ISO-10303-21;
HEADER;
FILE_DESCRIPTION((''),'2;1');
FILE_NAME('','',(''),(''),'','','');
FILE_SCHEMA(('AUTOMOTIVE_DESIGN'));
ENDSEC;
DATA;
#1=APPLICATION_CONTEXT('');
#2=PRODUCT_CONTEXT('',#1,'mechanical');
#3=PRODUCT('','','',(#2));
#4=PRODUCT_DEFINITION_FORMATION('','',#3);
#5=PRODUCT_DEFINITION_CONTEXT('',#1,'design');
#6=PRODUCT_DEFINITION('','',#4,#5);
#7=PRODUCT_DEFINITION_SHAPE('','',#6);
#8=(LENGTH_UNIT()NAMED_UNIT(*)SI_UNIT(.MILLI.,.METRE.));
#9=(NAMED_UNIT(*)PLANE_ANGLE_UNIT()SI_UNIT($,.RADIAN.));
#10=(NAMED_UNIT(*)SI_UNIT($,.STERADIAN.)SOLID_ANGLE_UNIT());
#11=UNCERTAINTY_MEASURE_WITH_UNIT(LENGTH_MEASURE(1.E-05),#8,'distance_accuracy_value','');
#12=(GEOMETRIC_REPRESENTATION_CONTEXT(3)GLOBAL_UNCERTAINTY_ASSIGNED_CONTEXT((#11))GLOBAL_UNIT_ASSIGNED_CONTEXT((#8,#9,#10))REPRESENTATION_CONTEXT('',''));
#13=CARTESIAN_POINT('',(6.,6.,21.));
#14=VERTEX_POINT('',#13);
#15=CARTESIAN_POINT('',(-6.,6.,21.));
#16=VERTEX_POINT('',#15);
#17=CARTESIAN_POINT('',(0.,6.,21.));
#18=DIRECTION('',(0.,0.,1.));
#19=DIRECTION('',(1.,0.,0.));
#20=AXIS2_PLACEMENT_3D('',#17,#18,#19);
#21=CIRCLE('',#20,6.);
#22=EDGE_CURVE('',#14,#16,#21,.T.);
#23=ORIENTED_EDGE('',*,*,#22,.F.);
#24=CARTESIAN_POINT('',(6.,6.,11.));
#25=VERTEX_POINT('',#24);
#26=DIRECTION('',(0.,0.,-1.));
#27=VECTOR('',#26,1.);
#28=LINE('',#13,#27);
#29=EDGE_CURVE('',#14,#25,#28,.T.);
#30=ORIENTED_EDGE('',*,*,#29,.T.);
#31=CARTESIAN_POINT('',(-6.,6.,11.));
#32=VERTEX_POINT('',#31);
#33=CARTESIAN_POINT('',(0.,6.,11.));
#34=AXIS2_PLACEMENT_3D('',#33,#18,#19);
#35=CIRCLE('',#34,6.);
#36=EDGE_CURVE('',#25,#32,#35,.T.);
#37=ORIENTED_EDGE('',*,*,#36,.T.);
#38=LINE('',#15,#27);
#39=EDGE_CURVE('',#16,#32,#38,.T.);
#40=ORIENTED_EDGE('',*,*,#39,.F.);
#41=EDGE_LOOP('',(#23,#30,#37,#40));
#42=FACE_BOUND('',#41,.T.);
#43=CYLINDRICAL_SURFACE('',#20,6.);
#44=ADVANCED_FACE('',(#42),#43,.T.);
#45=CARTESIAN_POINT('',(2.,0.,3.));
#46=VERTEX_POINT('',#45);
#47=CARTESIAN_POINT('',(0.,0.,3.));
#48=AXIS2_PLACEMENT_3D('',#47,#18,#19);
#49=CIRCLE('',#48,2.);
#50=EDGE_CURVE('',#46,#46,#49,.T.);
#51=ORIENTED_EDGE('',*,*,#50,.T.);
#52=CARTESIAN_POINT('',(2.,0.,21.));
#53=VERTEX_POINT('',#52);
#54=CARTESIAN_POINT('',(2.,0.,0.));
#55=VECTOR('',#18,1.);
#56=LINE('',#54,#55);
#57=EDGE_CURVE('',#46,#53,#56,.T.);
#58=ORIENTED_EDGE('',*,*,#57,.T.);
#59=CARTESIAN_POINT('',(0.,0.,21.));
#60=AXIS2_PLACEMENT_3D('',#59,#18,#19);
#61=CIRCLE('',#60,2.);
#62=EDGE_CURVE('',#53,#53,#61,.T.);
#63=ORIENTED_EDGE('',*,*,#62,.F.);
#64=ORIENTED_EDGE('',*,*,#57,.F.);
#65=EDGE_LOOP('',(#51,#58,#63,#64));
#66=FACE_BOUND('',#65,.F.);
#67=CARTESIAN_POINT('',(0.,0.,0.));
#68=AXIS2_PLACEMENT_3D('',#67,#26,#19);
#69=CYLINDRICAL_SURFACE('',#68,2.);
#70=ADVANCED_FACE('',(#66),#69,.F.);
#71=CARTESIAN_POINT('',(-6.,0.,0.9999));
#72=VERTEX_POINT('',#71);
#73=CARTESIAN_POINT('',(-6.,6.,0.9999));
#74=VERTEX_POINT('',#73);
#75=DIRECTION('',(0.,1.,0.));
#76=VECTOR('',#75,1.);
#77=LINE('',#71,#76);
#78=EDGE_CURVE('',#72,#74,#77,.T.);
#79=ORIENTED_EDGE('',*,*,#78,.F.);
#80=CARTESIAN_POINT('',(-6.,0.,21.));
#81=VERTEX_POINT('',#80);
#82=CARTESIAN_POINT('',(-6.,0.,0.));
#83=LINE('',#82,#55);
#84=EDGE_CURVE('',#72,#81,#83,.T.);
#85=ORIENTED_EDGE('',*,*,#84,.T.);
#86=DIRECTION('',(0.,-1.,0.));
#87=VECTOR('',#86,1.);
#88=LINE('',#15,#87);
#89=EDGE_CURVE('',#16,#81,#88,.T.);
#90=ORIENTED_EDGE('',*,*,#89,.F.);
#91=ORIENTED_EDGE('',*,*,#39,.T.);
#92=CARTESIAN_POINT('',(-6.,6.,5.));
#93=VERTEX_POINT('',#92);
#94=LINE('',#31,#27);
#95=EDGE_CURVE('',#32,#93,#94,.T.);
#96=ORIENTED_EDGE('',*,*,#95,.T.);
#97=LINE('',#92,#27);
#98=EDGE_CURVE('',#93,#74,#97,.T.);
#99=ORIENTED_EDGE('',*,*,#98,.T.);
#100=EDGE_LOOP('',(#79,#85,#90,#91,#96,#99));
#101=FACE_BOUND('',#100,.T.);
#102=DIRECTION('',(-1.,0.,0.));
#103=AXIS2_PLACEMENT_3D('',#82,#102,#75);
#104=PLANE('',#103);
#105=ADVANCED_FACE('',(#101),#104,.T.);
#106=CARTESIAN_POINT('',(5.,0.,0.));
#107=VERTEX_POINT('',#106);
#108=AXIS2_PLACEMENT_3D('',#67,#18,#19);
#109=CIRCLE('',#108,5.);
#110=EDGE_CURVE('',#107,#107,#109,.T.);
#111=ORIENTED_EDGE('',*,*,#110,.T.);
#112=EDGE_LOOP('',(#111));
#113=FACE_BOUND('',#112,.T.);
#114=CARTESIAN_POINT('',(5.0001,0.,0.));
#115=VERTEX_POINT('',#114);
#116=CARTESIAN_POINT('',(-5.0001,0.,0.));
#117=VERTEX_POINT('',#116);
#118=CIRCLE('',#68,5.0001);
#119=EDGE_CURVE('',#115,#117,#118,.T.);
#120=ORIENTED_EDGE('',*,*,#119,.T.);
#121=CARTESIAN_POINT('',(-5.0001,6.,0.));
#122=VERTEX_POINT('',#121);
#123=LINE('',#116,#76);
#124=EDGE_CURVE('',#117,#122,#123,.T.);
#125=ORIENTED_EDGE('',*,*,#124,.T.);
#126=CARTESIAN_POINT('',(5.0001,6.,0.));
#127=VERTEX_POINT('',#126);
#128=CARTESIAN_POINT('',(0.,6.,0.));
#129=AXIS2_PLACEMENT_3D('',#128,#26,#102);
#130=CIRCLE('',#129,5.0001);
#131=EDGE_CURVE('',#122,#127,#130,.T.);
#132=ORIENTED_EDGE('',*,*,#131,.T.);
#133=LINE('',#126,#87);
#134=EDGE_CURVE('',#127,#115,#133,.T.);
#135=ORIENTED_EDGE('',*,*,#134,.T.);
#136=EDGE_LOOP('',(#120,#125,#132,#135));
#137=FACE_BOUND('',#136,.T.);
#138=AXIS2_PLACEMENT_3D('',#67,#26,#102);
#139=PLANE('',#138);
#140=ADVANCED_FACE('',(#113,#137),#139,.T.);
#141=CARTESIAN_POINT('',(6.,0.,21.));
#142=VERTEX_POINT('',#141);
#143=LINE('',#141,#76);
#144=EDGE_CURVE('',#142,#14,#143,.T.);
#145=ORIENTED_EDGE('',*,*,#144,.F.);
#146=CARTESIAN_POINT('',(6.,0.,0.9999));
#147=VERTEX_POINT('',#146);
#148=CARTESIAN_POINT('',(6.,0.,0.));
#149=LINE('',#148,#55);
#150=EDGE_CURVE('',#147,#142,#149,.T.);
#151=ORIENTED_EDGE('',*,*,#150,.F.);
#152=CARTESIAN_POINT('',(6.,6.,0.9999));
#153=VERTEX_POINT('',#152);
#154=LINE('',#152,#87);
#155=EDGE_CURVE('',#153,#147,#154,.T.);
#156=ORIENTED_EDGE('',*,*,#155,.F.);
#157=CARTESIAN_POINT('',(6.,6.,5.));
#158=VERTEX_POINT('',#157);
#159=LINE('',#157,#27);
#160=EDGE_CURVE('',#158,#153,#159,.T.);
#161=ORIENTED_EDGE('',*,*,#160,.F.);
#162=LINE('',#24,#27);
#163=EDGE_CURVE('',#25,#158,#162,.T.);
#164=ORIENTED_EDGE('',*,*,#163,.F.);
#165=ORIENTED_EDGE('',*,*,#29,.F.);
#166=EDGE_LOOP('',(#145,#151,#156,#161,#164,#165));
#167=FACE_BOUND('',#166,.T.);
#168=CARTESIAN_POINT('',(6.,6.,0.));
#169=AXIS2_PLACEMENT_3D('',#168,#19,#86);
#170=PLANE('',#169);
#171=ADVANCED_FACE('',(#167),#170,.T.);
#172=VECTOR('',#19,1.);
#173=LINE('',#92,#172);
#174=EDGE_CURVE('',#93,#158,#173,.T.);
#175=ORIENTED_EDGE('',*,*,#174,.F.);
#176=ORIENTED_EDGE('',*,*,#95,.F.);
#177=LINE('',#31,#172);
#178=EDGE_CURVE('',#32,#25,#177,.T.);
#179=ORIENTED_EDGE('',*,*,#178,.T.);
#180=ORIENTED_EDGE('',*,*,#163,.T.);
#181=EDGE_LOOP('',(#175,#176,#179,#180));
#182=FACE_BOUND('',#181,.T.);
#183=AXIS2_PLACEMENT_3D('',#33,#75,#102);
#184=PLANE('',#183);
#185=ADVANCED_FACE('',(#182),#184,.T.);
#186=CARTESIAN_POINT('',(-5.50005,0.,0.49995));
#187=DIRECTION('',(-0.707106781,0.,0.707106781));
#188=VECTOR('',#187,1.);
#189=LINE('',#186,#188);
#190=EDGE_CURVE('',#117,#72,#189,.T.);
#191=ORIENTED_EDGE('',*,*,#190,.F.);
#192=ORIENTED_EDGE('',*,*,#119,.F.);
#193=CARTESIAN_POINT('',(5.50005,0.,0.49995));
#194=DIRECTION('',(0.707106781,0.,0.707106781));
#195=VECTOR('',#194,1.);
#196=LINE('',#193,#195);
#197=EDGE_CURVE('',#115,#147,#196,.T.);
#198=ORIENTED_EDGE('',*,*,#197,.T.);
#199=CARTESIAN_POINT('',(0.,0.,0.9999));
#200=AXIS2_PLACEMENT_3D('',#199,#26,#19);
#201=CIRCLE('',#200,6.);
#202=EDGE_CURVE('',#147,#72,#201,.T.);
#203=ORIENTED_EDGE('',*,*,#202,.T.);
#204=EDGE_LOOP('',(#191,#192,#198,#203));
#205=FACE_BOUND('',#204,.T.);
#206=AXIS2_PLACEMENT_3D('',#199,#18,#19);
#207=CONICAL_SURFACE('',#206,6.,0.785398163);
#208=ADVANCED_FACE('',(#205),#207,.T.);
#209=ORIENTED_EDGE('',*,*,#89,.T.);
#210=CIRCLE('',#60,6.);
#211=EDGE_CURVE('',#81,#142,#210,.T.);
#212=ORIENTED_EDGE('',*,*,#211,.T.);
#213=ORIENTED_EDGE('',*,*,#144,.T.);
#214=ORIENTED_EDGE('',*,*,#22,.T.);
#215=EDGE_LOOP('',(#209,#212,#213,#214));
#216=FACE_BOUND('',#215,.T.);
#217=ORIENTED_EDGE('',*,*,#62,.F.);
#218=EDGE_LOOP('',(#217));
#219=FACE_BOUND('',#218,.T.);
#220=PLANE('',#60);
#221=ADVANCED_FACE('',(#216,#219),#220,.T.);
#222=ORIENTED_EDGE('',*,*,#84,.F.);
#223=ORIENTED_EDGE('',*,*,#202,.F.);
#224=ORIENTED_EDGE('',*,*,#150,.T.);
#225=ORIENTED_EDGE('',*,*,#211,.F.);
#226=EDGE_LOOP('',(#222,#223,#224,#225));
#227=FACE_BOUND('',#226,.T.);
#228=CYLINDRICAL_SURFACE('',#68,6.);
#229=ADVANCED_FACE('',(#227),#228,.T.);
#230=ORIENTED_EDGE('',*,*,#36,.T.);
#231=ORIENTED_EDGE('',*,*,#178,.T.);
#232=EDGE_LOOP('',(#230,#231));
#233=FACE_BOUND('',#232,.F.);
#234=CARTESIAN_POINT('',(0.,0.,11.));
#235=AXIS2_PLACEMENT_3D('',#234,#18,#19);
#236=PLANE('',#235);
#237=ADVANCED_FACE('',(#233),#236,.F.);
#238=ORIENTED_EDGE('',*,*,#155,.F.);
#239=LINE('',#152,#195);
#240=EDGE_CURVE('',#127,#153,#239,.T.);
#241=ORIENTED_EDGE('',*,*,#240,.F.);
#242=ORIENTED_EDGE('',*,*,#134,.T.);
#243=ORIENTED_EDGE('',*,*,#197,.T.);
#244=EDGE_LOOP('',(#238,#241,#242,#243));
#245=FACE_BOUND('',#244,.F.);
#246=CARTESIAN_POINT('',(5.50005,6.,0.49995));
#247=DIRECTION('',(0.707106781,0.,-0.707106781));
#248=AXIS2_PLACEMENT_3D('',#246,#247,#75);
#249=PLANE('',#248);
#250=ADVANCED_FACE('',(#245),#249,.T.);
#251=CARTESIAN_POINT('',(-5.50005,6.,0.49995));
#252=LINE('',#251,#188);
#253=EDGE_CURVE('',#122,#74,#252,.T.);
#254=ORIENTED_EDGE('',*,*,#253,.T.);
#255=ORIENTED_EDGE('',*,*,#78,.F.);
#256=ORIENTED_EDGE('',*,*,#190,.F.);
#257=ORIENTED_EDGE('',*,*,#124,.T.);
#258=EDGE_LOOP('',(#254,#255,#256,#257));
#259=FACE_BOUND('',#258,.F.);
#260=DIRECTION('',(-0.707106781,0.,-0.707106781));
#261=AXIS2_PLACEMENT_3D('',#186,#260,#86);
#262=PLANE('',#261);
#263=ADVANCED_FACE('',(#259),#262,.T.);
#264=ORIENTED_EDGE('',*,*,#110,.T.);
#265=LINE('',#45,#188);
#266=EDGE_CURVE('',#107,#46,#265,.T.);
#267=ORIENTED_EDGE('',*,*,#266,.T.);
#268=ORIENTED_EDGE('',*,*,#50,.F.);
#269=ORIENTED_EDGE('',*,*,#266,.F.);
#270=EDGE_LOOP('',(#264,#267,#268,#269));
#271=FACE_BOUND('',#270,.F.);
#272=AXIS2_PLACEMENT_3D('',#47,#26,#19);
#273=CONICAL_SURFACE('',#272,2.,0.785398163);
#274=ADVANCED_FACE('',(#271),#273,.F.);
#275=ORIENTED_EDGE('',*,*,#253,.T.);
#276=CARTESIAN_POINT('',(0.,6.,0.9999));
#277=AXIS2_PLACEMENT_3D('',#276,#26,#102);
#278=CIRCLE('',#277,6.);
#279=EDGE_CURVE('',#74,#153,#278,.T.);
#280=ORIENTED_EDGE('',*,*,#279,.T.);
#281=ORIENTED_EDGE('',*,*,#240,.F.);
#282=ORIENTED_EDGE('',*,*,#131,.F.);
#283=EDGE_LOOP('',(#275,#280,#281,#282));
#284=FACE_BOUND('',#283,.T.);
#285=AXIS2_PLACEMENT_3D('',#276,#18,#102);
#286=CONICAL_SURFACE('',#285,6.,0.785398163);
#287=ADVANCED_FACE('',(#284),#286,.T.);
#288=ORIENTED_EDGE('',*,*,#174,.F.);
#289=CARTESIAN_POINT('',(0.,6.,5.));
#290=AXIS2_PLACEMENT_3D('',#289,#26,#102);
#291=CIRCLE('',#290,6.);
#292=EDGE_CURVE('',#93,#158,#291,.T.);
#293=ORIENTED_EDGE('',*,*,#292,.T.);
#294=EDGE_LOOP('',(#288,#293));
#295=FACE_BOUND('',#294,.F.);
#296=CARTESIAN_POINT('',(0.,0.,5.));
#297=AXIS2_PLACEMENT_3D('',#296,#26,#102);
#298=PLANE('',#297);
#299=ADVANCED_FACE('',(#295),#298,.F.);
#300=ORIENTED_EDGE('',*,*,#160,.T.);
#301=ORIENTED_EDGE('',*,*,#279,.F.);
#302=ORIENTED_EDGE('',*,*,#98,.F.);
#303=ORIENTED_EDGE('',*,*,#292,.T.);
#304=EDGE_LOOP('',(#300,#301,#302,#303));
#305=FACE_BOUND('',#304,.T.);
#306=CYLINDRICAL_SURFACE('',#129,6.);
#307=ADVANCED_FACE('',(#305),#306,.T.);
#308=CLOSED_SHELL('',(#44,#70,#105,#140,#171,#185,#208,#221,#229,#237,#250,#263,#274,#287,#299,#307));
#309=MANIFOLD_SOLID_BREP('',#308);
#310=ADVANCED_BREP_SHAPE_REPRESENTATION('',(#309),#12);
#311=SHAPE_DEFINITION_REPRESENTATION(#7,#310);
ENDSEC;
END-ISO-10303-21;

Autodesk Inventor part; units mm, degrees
ref_plane "YZ Plane" through (0, 0, 0) normal (1, 0, 0) x (0, 1, 0)
ref_plane "XZ Plane" through (0, 0, 0) normal (0, 1, 0) x (-1, 0, 0)
ref_plane "XY Plane" through (0, 0, 0) normal (0, 0, 1) x (1, 0, 0)
sketch "Sketch2" plane through (0, 0, 0) normal (0, 0, 1) x (1, 0, 0)
  circle A0 centre (0, 0) radius 6
  circle A1 centre (0, 0) radius 2
  dimension "d0" = 12
  dimension "d1" = 4
extrude "Extrusion1" add sketch "Sketch2" along normal blind 21
sketch "Sketch3" plane through (0, 0, 21) normal (0, 0, 1) x (1, 0, 0)
  line L0 (0, 0) -> (0, 6) construction
  line L1 (6, 0) -> (6, 6)
  line L2 (-6, 6) -> (-6, 0)
  arc A0 (-6, 0) -> (6, 0) centre (0, 0) ccw
  arc A1 (6, 6) -> (-6, 6) centre (0, 6) ccw
  circle A2 centre (0, 0) radius 2 projected
  circle A3 centre (0, 0) radius 6 projected
  circle A4 centre (0, 0) radius 2 projected
  circle A5 centre (0, 0) radius 6 projected
  point P0 (0, 3)
  dimension "d4" = 6
  dimension "d5" = 6
extrude "Extrusion2" add sketch "Sketch3" against normal blind 10 contours A3 L2 A1 L1
sketch "Sketch4" plane through (0, 0, 0) normal (0, 0, -1) x (-1, 0, 0)
  arc A0 (6, 6) -> (-6, 6) centre (0, 6) ccw projected
  line L0 (-6, 6) -> (-6, 0) projected
  line L1 (6, 0) -> (6, 6) projected
  arc A1 (6, 0) -> (-6, 0) centre (0, 0) ccw projected
  circle A2 centre (0, 0) radius 2 projected
extrude "Extrusion3" add sketch "Sketch4" against normal blind 5 contours L1 A1 L0 A0
sketch "Sketch5" plane through (0, 0, 11) normal (0, 0, -1) x (-1, 0, 0)
  arc A0 (6, 6) -> (-6, 6) centre (0, 6) ccw projected
  line L0 (-6, 6) -> (-6, 0) projected
  line L1 (6, 0) -> (6, 6) projected
  arc A1 (6, 0) -> (-6, 0) centre (0, 0) ccw projected
  line L2 (-6, 6) -> (6, 6)
  arc A2 (6, 0) -> (-6, 0) centre (0, 0) ccw projected
  point P0 (0, 6)
extrude "Extrusion4" add sketch "Sketch5" along normal blind 6.4 contours L1 A1 L2 | L2 A1 L0
chamfer "Chamfer1" distance 3 angle 45 1 edges at (-2, 0, 0)
chamfer "Chamfer2" distance 1 angle 45 4 edges at (-6, 3, 0) (0, 12, 0) (6, 3, 0) (0, -6, 0)
properties part number "picture-fixings-6mm"
